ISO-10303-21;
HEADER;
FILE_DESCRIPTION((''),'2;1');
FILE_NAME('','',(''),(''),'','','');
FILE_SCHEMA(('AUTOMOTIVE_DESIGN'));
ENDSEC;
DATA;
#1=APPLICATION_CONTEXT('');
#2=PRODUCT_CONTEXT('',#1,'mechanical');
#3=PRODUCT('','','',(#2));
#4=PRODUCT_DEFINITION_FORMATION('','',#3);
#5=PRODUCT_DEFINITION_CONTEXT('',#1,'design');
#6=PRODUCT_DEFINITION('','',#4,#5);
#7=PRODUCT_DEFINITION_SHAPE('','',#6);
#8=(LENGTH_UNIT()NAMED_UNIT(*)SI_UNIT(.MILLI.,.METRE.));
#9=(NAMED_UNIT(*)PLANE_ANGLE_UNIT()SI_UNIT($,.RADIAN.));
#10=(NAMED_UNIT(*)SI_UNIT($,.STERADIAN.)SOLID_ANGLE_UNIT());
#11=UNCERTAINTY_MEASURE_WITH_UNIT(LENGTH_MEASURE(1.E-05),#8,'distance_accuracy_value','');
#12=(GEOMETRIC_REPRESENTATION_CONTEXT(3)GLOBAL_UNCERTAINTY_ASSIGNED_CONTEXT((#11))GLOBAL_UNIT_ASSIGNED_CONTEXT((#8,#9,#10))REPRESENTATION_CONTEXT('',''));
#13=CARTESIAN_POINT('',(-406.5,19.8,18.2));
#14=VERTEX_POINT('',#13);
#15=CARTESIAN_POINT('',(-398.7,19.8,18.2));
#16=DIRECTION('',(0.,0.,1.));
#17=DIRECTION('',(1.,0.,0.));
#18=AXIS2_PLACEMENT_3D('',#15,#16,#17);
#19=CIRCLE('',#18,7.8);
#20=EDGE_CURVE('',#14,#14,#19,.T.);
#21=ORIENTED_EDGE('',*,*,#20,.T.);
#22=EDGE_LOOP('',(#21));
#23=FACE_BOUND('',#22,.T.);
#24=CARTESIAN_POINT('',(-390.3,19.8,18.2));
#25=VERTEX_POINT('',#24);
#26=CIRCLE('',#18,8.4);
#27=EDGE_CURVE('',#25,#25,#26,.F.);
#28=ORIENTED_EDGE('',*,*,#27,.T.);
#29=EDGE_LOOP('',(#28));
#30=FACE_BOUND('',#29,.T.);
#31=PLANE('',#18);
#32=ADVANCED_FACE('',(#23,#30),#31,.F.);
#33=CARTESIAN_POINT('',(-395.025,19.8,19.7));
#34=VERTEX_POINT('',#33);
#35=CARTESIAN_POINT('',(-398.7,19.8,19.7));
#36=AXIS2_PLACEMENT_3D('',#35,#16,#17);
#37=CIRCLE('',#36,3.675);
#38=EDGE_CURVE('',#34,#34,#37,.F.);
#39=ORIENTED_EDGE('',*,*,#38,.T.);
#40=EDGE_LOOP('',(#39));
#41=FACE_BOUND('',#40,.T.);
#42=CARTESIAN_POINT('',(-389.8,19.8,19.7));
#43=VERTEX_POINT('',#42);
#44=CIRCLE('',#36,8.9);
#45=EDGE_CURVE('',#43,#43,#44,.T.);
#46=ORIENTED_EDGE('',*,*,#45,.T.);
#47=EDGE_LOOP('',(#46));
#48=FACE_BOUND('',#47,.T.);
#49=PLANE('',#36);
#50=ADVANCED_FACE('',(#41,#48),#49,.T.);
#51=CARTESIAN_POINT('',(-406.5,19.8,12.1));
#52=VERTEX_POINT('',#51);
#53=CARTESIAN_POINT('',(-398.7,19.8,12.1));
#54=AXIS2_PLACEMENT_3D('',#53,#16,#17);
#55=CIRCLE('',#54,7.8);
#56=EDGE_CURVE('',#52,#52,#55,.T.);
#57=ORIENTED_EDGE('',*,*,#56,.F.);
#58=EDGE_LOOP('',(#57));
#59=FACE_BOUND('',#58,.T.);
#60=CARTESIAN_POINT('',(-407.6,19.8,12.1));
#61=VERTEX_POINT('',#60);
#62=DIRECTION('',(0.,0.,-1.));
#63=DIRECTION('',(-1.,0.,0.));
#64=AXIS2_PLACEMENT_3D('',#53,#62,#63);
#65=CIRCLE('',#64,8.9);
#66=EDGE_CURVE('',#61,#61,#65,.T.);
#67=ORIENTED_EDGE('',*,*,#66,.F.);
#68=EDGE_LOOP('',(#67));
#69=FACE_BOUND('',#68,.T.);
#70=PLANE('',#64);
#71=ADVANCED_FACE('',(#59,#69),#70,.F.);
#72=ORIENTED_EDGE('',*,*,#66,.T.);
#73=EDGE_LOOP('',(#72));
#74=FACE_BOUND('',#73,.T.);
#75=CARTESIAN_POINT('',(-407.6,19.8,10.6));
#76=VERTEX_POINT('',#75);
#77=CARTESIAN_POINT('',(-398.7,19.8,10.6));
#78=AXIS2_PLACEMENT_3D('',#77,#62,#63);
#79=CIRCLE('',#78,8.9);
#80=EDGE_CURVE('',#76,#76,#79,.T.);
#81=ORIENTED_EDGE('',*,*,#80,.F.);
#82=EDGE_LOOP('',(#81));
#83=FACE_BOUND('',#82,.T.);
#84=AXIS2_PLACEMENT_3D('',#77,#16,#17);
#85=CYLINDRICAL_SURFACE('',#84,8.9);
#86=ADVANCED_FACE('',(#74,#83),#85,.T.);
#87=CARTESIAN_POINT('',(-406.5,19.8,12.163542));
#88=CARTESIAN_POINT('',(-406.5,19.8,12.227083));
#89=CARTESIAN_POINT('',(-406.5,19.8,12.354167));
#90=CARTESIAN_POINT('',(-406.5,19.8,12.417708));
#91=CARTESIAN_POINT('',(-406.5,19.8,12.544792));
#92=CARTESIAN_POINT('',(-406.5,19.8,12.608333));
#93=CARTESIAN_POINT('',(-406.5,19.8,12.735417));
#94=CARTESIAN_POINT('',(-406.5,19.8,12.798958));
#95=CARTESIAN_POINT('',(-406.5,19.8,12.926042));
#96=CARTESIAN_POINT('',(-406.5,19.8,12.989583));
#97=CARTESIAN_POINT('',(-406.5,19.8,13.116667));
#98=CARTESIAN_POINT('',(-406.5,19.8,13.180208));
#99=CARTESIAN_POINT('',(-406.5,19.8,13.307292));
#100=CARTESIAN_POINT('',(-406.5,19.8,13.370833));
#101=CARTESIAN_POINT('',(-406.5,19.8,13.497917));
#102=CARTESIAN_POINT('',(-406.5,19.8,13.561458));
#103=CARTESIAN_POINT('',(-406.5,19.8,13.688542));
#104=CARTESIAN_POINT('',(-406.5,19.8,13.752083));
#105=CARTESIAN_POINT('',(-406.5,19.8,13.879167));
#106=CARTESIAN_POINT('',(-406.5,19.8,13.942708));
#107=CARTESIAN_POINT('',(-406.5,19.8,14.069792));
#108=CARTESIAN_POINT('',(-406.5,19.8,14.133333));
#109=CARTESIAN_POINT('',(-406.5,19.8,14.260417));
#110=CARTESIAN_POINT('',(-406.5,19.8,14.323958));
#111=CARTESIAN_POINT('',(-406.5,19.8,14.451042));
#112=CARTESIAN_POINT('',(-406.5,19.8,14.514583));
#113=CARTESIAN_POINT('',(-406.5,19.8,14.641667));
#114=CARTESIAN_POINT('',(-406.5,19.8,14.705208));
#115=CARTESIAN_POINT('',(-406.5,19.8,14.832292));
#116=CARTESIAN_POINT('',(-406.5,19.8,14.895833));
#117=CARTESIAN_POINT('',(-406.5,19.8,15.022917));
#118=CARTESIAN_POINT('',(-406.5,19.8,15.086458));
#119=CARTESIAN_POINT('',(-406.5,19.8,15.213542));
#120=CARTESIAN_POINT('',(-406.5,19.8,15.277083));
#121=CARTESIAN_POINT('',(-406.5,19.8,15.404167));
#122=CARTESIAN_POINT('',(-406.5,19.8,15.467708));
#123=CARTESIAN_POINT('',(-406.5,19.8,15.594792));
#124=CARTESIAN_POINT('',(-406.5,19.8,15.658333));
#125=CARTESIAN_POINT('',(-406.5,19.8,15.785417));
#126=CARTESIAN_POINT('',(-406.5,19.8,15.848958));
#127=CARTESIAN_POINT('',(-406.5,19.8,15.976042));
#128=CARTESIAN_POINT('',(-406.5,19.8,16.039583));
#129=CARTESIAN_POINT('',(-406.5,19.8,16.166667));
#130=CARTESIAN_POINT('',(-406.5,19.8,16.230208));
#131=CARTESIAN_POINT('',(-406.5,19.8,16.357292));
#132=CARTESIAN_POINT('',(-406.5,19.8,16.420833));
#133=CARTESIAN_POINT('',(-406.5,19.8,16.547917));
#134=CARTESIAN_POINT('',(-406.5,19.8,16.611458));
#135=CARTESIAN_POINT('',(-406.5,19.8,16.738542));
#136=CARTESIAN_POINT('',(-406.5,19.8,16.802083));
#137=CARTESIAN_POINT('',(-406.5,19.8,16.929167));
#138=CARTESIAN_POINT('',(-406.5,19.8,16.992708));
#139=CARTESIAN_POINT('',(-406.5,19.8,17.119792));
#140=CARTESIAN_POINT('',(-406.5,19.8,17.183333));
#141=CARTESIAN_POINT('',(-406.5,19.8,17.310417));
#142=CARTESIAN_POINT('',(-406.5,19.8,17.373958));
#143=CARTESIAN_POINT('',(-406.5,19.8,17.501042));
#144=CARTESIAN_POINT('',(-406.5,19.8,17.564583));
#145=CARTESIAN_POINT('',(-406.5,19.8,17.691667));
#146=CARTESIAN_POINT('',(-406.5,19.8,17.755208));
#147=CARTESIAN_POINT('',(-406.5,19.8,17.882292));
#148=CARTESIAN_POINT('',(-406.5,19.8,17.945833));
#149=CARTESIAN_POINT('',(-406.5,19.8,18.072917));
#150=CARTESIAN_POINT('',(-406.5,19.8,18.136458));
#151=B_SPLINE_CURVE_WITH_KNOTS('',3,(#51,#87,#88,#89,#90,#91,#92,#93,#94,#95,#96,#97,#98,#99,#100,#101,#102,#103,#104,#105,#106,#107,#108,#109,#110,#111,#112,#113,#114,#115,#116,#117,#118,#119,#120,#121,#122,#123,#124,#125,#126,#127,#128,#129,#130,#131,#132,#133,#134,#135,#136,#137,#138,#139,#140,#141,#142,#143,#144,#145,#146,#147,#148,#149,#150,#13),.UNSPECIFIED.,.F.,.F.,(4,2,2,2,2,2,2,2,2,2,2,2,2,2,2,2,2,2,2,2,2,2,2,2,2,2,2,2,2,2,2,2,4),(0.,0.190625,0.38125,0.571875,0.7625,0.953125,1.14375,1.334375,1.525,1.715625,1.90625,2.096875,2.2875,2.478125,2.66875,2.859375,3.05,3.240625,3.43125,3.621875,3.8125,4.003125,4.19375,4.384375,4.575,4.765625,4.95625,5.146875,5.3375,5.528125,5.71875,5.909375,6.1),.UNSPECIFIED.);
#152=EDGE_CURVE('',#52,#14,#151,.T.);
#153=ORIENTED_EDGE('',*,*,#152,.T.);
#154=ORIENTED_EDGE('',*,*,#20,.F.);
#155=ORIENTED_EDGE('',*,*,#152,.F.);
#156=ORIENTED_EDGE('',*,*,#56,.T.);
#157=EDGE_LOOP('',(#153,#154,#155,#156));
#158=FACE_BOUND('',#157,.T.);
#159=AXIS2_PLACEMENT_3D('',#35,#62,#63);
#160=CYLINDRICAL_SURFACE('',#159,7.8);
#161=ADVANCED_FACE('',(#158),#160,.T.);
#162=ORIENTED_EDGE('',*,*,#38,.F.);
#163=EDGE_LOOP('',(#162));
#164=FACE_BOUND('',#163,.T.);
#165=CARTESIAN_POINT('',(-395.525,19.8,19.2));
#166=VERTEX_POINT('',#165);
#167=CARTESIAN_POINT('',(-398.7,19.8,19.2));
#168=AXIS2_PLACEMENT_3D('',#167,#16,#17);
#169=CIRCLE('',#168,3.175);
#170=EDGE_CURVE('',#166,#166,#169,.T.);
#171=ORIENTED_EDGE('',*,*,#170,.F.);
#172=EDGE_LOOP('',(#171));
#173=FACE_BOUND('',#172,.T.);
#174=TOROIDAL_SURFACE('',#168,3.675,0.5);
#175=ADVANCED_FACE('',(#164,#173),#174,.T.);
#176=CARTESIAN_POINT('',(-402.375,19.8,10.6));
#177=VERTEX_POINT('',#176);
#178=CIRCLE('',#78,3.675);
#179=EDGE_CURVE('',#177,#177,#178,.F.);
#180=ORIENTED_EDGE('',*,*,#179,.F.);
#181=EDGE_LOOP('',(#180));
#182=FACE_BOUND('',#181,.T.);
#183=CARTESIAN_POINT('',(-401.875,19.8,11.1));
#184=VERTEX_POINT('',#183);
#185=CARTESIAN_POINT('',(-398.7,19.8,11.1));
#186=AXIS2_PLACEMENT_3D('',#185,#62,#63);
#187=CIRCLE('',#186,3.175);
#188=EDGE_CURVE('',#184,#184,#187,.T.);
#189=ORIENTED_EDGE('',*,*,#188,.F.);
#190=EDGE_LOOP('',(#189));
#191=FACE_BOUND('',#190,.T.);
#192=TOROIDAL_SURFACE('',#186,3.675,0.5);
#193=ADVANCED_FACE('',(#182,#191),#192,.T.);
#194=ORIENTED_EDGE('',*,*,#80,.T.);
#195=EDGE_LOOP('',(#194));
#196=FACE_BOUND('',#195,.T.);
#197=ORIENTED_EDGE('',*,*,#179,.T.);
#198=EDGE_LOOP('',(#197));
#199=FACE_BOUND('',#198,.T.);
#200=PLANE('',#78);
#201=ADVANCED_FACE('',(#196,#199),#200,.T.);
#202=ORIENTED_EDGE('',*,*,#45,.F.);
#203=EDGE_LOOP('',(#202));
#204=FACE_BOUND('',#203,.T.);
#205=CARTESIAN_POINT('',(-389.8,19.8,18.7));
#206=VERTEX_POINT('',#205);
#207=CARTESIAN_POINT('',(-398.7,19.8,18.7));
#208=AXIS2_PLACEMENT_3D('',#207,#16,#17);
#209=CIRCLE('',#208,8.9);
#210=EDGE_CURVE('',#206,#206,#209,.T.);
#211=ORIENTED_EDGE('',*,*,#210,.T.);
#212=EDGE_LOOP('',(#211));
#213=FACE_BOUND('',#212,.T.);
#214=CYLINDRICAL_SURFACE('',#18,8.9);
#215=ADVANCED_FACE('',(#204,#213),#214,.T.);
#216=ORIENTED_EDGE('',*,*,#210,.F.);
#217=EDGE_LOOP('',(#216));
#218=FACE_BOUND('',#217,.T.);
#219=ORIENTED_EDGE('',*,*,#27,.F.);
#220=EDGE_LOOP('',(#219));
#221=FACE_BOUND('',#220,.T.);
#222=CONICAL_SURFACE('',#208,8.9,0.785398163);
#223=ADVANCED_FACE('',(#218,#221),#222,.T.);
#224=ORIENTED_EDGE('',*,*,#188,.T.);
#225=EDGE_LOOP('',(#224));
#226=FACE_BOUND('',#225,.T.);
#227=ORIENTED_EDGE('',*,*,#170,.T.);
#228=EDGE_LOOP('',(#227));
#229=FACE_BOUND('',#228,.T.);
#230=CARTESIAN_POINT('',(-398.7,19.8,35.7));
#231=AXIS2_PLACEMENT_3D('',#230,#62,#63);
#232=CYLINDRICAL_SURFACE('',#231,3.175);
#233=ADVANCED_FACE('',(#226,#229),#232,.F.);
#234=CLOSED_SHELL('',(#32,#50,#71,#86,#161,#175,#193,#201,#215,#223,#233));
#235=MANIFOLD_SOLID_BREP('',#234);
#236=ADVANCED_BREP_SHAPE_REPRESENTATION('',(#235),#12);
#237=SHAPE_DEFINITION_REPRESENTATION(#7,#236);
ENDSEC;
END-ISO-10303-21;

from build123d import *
from OCP.BRepFilletAPI import BRepFilletAPI_MakeChamfer

# Parameters (mm, degrees)
ESBO_O1_W                  = 97.4
ESBO_O1_H                  = 1.25
RESSALTO_EXTRUS_O1_DEPTH   = 6.2
ESBO_O2_W                  = 97.4
ESBO_O2_H                  = 1.25
RESSALTO_EXTRUS_O2_DEPTH   = 40.6
FILETE1_R                  = 1
ESBO_O3_R                  = 2
ESBO_O3_R_2                = 2.5
ESBO_O3_R_3                = 6
ESBO_O3_W                  = 4
ESBO_O3_H                  = 6
ESBO_O3_W_2                = 6
ESBO_O3_H_2                = 8
CORTE_EXTRUS_O1_DEPTH      = 40.6
ESBO_O6_R                  = 3
RESSALTO_EXTRUS_O3_DEPTH   = 22.5
ESBO_O7_R                  = 2.25
RESSALTO_EXTRUS_O4_DEPTH   = 12.3
FILETE2_R                  = 0.25
ESBO_O12_R                 = 4
RESSALTO_EXTRUS_O7_DEPTH   = 3
ESBO_O13_R                 = 4.5
RESSALTO_EXTRUS_O8_DEPTH   = 8.1
ESBO_O8_R                  = 16.365
ESBO_O8_R_2                = 2.3
RESSALTO_EXTRUS_O5_DEPTH   = 4
ESBO_O9_R                  = 4
ESBO_O9_R_2                = 2.3
RESSALTO_EXTRUS_O6_DEPTH   = 8.9
ESBO_O10_R                 = 13.865
ESBO_O10_R_2               = 4.9
CORTE_EXTRUS_O2_DEPTH      = 1
CORTE_EXTRUS_O3_START      = -1
ESBO_O11_R                 = 13.86
ESBO_O11_R_2               = 4.9
CORTE_EXTRUS_O3_DEPTH      = 1
ESBO_O14_R                 = 18.34
ESBO_O14_R_2               = 3.1
RESSALTO_EXTRUS_O9_DEPTH   = 4
ESBO_O15_R                 = 7.8
ESBO_O15_R_2               = 3.1
RESSALTO_EXTRUS_O10_DEPTH  = 11.6
RESSALTO_EXTRUS_O11_START  = -1.5
ESBO_O16_R                 = 8.9
ESBO_O16_R_2               = 3.1
RESSALTO_EXTRUS_O11_DEPTH  = 1.5
CHANFRO1_SIZE              = 0.5
ESBO_O17_R                 = 3.5
ESBO_O17_R_2               = 3.1
RESSALTO_EXTRUS_O12_DEPTH  = 0.5
CORTE_EXTRUS_O4_START      = -1
ESBO_O18_R                 = 15.84
ESBO_O18_R_2               = 8.9
CORTE_EXTRUS_O4_DEPTH      = 1
ESBO_O19_R                 = 15.825
ESBO_O19_R_2               = 8.9
CORTE_EXTRUS_O5_DEPTH      = 1
RESSALTO_EXTRUS_O13_DEPTH  = 0.5
ESBO_O21_R                 = 1.75
RESSALTO_EXTRUS_O14_DEPTH  = 0.92
ESBO_O23_R                 = 17.675026778
RESSALTO_EXTRUS_O15_DEPTH  = 15
FILETE4_R                  = 1
ESBO_O24_R                 = 2.05
ESBO_O24_R_2               = 1.75
RESSALTO_EXTRUS_O16_DEPTH  = 1
ESBO_O25_R                 = 2.5
RESSALTO_EXTRUS_O17_DEPTH  = 0.1
ESBO_O26_R                 = 1
RESSALTO_EXTRUS_O18_DEPTH  = 0.5
FILETE6_R                  = 0.1
ESBO_O27_R                 = 4.99
RESSALTO_EXTRUS_O19_DEPTH  = 16.57
RESSALTO_EXTRUS_O20_START  = -25
ESBO_O28_R                 = 1
RESSALTO_EXTRUS_O20_DEPTH  = 25
FILETE5_R                  = 0.25
ESBO_O29_R                 = 3.59
RESSALTO_EXTRUS_O21_DEPTH  = 6
ESBO_O30_R                 = 2.7
RESSALTO_EXTRUS_O22_DEPTH  = 2
FILETE7_R                  = 1.4
CORTE_EXTRUS_O6_DEPTH      = 1.4
ESBO_O32_R                 = 1.75
RESSALTO_EXTRUS_O23_DEPTH  = 7.8
CHANFRO2_SIZE              = 1
CHANFRO2_SIZE2             = 0.466307658
RESSALTO_EXTRUS_O24_DEPTH  = 10
ESBO_O34_R                 = 2
RESSALTO_EXTRUS_O25_DEPTH  = 5
ESBO_O35_R                 = 7.8
RESSALTO_EXTRUS_O26_DEPTH  = 7.6
ESBO_O37_R                 = 8.9
RESSALTO_EXTRUS_O27_DEPTH  = 1.5
CHANFRO3_SIZE              = 0.5
ESBO_O38_R                 = 8.9
RESSALTO_EXTRUS_O28_DEPTH  = 1.5
CORTE_EXTRUS_O7_DEPTH      = 16
CORTE_EXTRUS_O7_DEPTH_BACK = 35.5
ESBO_O39_R                 = 3.175
FILETE11_R                 = 0.5
FILETE12_R                 = 0.25
FILETE13_R                 = 0.5


with BuildPart() as part:
    # Esboço1 → Ressalto-extrusão1 (new body)
    with BuildSketch(Plane.XY):
        Rectangle(ESBO_O1_W, ESBO_O1_H)
    extrude(amount=RESSALTO_EXTRUS_O1_DEPTH)

    # Esboço2 → Ressalto-extrusão2 (add)
    with BuildSketch(Plane(origin=(0, -0.625, 0), x_dir=(1, 0, 0), z_dir=(0, 1, 0))):
        with Locations((0, -0.625)):
            Rectangle(ESBO_O2_W, ESBO_O2_H)
    extrude(amount=RESSALTO_EXTRUS_O2_DEPTH)

    # Filete1
    filete1_edges = [part.edges().sort_by_distance(p)[0] for p in [
        (48.7, 0, 6.2),
        (48.7, 39.975, 0.625),
        (-48.7, 39.975, 0.625),
        (-48.7, 0, 6.2),
    ]]
    fillet(filete1_edges, radius=FILETE1_R)

    # Esboço3 → Corte-extrusão1 (cut)
    with BuildSketch(Plane.XY.offset(1.25)):
        with Locations((-43.7, 4.975)):
            Circle(ESBO_O3_R)
        with Locations((0, 4.975)):
            Circle(ESBO_O3_R)
        with Locations((38.95, 19.8)):
            Circle(ESBO_O3_R_2)
        with Locations((14.7, 19.8)):
            Circle(ESBO_O3_R_3)
        with Locations((41.7, 30.975)):
            Rectangle(ESBO_O3_W, ESBO_O3_H)
        with Locations((41.7, 8.975)):
            Rectangle(ESBO_O3_W, ESBO_O3_H)
        with Locations((-33.7, 8.975)):
            Rectangle(ESBO_O3_W_2, ESBO_O3_H_2)
        with BuildLine():
            Line((27.7, 36.975), (30.7, 36.975))
            ThreePointArc((30.7, 36.975), (32.7, 34.975), (30.7, 32.975))
            Line((30.7, 32.975), (27.7, 32.975))
            ThreePointArc((27.7, 32.975), (25.7, 34.975), (27.7, 36.975))
        make_face()
        with Locations((-33.7, 30.975)):
            Rectangle(ESBO_O3_W_2, ESBO_O3_H_2)
    extrude(amount=-CORTE_EXTRUS_O1_DEPTH, mode=Mode.SUBTRACT)

    # Esboço6 → Ressalto-extrusão3 (add)
    with BuildSketch(Plane(origin=(0, 0, 0), x_dir=(-1, 0, 0), z_dir=(0, 0, -1))):
        with Locations((25.7, 19.8)):
            Circle(ESBO_O6_R)
    extrude(amount=-RESSALTO_EXTRUS_O3_DEPTH)

    # Esboço7 → Ressalto-extrusão4 (add)
    with BuildSketch(Plane(origin=(0, 0, 0), x_dir=(-1, 0, 0), z_dir=(0, 0, -1))):
        with Locations((4.1, 23.975)):
            Circle(ESBO_O7_R)
    extrude(amount=-RESSALTO_EXTRUS_O4_DEPTH)

    # Filete2
    filete2_edges = [part.edges().sort_by_distance(p)[0] for p in [
        (-22.7, 19.8, 22.5),
        (-1.85, 23.975, 12.3),
    ]]
    fillet(filete2_edges, radius=FILETE2_R)

    # Esboço12 → Ressalto-extrusão7 (add)
    with BuildSketch(Plane.XY):
        with Locations(Location((-4.1, 23.975, 0), (0, 0, 180))):
            Circle(ESBO_O12_R)
    extrude(amount=RESSALTO_EXTRUS_O7_DEPTH)

    # Esboço13 → Ressalto-extrusão8 (add)
    with BuildSketch(Plane(origin=(0, 0, 0), x_dir=(-1, 0, 0), z_dir=(0, 0, -1))):
        with Locations((25.7, 19.8)):
            Circle(ESBO_O13_R)
    extrude(amount=-RESSALTO_EXTRUS_O8_DEPTH)

    # Esboço8 → Ressalto-extrusão5 (add)
    with BuildSketch(Plane.XY.offset(3)):
        with Locations((-4.1, 23.975)):
            Circle(ESBO_O8_R)
        with Locations((-4.1, 23.975)):
            Circle(ESBO_O8_R_2, mode=Mode.SUBTRACT)
    extrude(amount=RESSALTO_EXTRUS_O5_DEPTH)

    # Esboço9 → Ressalto-extrusão6 (add)
    with BuildSketch(Plane.XY.offset(3)):
        with Locations(Location((-4.1, 23.975, 0), (0, 0, 180))):
            Circle(ESBO_O9_R)
        with Locations((-4.1, 23.975)):
            Circle(ESBO_O9_R_2, mode=Mode.SUBTRACT)
    extrude(amount=RESSALTO_EXTRUS_O6_DEPTH)

    # Esboço10 → Corte-extrusão2 (cut)
    with BuildSketch(Plane.XY.offset(7)):
        with Locations((-4.1, 23.975)):
            Circle(ESBO_O10_R)
        with Locations((-4.1, 23.975)):
            Circle(ESBO_O10_R_2, mode=Mode.SUBTRACT)
    extrude(amount=-CORTE_EXTRUS_O2_DEPTH, mode=Mode.SUBTRACT)

    # Esboço11 → Corte-extrusão3 (cut)
    with BuildSketch(Plane(origin=(0, 0, 3), x_dir=(-1, 0, 0), z_dir=(0, 0, -1)).offset(CORTE_EXTRUS_O3_START)):
        with Locations((4.1, 23.975)):
            Circle(ESBO_O11_R)
        with Locations(Location((4.1, 23.975, 0), (0, 0, 180))):
            Circle(ESBO_O11_R_2, mode=Mode.SUBTRACT)
    extrude(amount=CORTE_EXTRUS_O3_DEPTH, mode=Mode.SUBTRACT)

    # Esboço14 → Ressalto-extrusão9 (add)
    with BuildSketch(Plane.XY.offset(8.1)):
        with Locations(Location((-25.7, 19.8, 0), (0, 0, 15.545528491))):
            Circle(ESBO_O14_R)
        with Locations((-25.7, 19.8)):
            Circle(ESBO_O14_R_2, mode=Mode.SUBTRACT)
    extrude(amount=RESSALTO_EXTRUS_O9_DEPTH)

    # Esboço15 → Ressalto-extrusão10 (add)
    with BuildSketch(Plane.XY.offset(8.1)):
        with Locations((-25.7, 19.8)):
            Circle(ESBO_O15_R)
        with Locations((-25.7, 19.8)):
            Circle(ESBO_O15_R_2, mode=Mode.SUBTRACT)
    extrude(amount=RESSALTO_EXTRUS_O10_DEPTH)

    # Esboço16 → Ressalto-extrusão11 (add)
    with BuildSketch(Plane.XY.offset(19.7).offset(RESSALTO_EXTRUS_O11_START)):
        with Locations((-25.7, 19.8)):
            Circle(ESBO_O16_R)
        with Locations((-25.7, 19.8)):
            Circle(ESBO_O16_R_2, mode=Mode.SUBTRACT)
    extrude(amount=RESSALTO_EXTRUS_O11_DEPTH)

    # Chanfro1
    chanfro1_edges = [part.edges().sort_by_distance(p)[0] for p in [
        (-34.6, 19.8, 18.2),
    ]]
    chamfer(chanfro1_edges, length=CHANFRO1_SIZE)

    # Esboço17 → Ressalto-extrusão12 (add)
    with BuildSketch(Plane.XY.offset(19.7)):
        with Locations((-25.7, 19.8)):
            Circle(ESBO_O17_R)
        with Locations((-25.7, 19.8)):
            Circle(ESBO_O17_R_2, mode=Mode.SUBTRACT)
    extrude(amount=RESSALTO_EXTRUS_O12_DEPTH)

    # Esboço18 → Corte-extrusão4 (cut)
    with BuildSketch(Plane.XY.offset(12.1).offset(CORTE_EXTRUS_O4_START)):
        with Locations((-25.7, 19.8)):
            Circle(ESBO_O18_R)
        with Locations((-25.7, 19.8)):
            Circle(ESBO_O18_R_2, mode=Mode.SUBTRACT)
    extrude(amount=CORTE_EXTRUS_O4_DEPTH, mode=Mode.SUBTRACT)

    # Esboço19 → Corte-extrusão5 (cut)
    with BuildSketch(Plane(origin=(0, 0, 8.1), x_dir=(-1, 0, 0), z_dir=(0, 0, -1))):
        with Locations((25.7, 19.8)):
            Circle(ESBO_O19_R)
        with Locations(Location((25.7, 19.8, 0), (0, 0, 180))):
            Circle(ESBO_O19_R_2, mode=Mode.SUBTRACT)
    extrude(amount=-CORTE_EXTRUS_O5_DEPTH, mode=Mode.SUBTRACT)

    # Esboço20 → Ressalto-extrusão13 (add)
    with BuildSketch(Plane.XY.offset(20.2)):
        with BuildLine():
            Line((-28.322721615, 20.626940949), (-29.67498238, 21.05330713))
            ThreePointArc((-29.67498238, 21.05330713), (-29.981119219, 21.326162864), (-29.980184512, 21.736247175))
            ThreePointArc((-29.980184512, 21.736247175), (-28.137076875, 23.816178393), (-25.441102958, 24.490629478))
            ThreePointArc((-25.441102958, 24.490629478), (-25.076922131, 24.302102712), (-24.9762544, 23.904565262))
            Line((-24.9762544, 23.904565262), (-25.222467511, 22.508221321))
            ThreePointArc((-25.222467511, 22.508221321), (-24.430191314, 22.239279791), (-23.755456352, 21.744543648))
            Line((-23.755456352, 21.744543648), (-22.474650348, 23.025349652))
            ThreePointArc((-22.474650348, 23.025349652), (-22.187573749, 23.840156974), (-22.642480013, 24.574584803))
            ThreePointArc((-22.642480013, 24.574584803), (-31.36966388, 19.8), (-22.642480013, 15.025415197))
            ThreePointArc((-22.642480013, 15.025415197), (-22.187573749, 15.759843026), (-22.474650348, 16.574650348))
            Line((-22.474650348, 16.574650348), (-23.755456352, 17.855456352))
            ThreePointArc((-23.755456352, 17.855456352), (-24.430191314, 17.360720209), (-25.222467511, 17.091778679))
            Line((-25.222467511, 17.091778679), (-24.9762544, 15.695434738))
            ThreePointArc((-24.9762544, 15.695434738), (-25.076922131, 15.297897288), (-25.441102958, 15.109370522))
            ThreePointArc((-25.441102958, 15.109370522), (-28.137076875, 15.783821607), (-29.980184512, 17.863752825))
            ThreePointArc((-29.980184512, 17.863752825), (-29.981119219, 18.273837136), (-29.67498238, 18.54669287))
            Line((-29.67498238, 18.54669287), (-28.322721615, 18.973059051))
            ThreePointArc((-28.322721615, 18.973059051), (-28.45, 19.8), (-28.322721615, 20.626940949))
        make_face()
    extrude(amount=RESSALTO_EXTRUS_O13_DEPTH)

    # Esboço21 → Ressalto-extrusão14 (add)
    with BuildSketch(Plane(origin=(0, 0, 0), x_dir=(-1, 0, 0), z_dir=(0, 0, -1))):
        with BuildLine():
            Line((3.595164465, 5.161527392), (2.779555471, 20.88173038))
            ThreePointArc((2.779555471, 20.88173038), (-2.196938457, 32.222448714), (-13.433733778, 37.429349428))
            Line((-13.433733778, 37.429349428), (-29.134017665, 38.565609025))
            ThreePointArc((-29.134017665, 38.565609025), (-31.845866586, 37.610857858), (-32.993876913, 34.975))
            Line((-32.993876913, 34.975), (-32.993876913, 30.076020514))
            Line((-32.993876913, 30.076020514), (-30.487753652, 27.518219171))
            ThreePointArc((-30.487753652, 27.518219171), (-27.196938457, 7.727551286), (-7.477551833, 4.033530282))
            Line((-7.477551833, 4.033530282), (-4.87273477, 1.375))
            Line((-4.87273477, 1.375), (0, 1.375))
            ThreePointArc((0, 1.375), (2.610699007, 2.49624009), (3.595164465, 5.161527392))
        make_face()
        with Locations((0, 4.975)):
            Circle(ESBO_O21_R, mode=Mode.SUBTRACT)
        with Locations((-29.393876913, 34.975)):
            Circle(ESBO_O21_R, mode=Mode.SUBTRACT)
    extrude(amount=RESSALTO_EXTRUS_O14_DEPTH)

    # Esboço23 → Ressalto-extrusão15 (add)
    with BuildSketch(Plane.XY):
        with Locations((14.7, 19.8)):
            Circle(ESBO_O23_R)
    extrude(amount=-RESSALTO_EXTRUS_O15_DEPTH)

    # Filete4
    filete4_edges = [part.edges().sort_by_distance(p)[0] for p in [
        (-2.975026778, 19.8, -15),
    ]]
    fillet(filete4_edges, radius=FILETE4_R)

    # Esboço24 → Ressalto-extrusão16 (add)
    # profile 1 of 2: a face of its own
    with BuildSketch(Plane(origin=(0, 0, -0.92), x_dir=(-1, 0, 0), z_dir=(0, 0, -1))):
        with Locations((0, 4.975)):
            Circle(ESBO_O24_R)
        with Locations((0, 4.975)):
            Circle(ESBO_O24_R_2, mode=Mode.SUBTRACT)
    # profile 2 of 2: a face of its own
    with BuildSketch(Plane(origin=(0, 0, -0.92), x_dir=(-1, 0, 0), z_dir=(0, 0, -1))):
        with Locations((-29.393876913, 34.975)):
            Circle(ESBO_O24_R)
        with Locations((-29.393876913, 34.975)):
            Circle(ESBO_O24_R_2, mode=Mode.SUBTRACT)
    extrude(amount=RESSALTO_EXTRUS_O16_DEPTH)

    # Esboço25 → Ressalto-extrusão17 (add)
    with BuildSketch(Plane(origin=(0, 0, -15), x_dir=(-1, 0, 0), z_dir=(0, 0, -1))):
        with Locations(Location((-14.7, 19.8, 0), (0, 0, 180))):
            Circle(ESBO_O25_R)
    extrude(amount=RESSALTO_EXTRUS_O17_DEPTH)

    # Esboço26 → Ressalto-extrusão18 (add)
    with BuildSketch(Plane(origin=(0, 0, -15.1), x_dir=(-1, 0, 0), z_dir=(0, 0, -1))):
        with Locations((-14.7, 19.8)):
            Circle(ESBO_O26_R)
    extrude(amount=RESSALTO_EXTRUS_O18_DEPTH)

    # Filete6
    filete6_edges = [part.edges().sort_by_distance(p)[0] for p in [
        (12.2, 19.8, -15.1),
    ]]
    fillet(filete6_edges, radius=FILETE6_R - 0.0001)  # a hair under: the kernel refuses the full size

    # Esboço27 → Ressalto-extrusão19 (add)
    with BuildSketch(Plane.XY.offset(-15)):
        with Locations(Location((14.7, 19.8, 0), (0, 0, 180))):
            Circle(ESBO_O27_R)
    extrude(amount=RESSALTO_EXTRUS_O19_DEPTH)

    # Esboço28 → Ressalto-extrusão20 (add)
    with BuildSketch(Plane(origin=(0, 0, -15.6), x_dir=(-1, 0, 0), z_dir=(0, 0, -1)).offset(RESSALTO_EXTRUS_O20_START)):
        with Locations((-14.7, 19.8)):
            Circle(ESBO_O28_R)
    extrude(amount=RESSALTO_EXTRUS_O20_DEPTH)

    # Filete5
    filete5_edges = [part.edges().sort_by_distance(p)[0] for p in [
        (15.7, 19.8, -15.6),
        (15.7, 19.8, 9.4),
    ]]
    fillet(filete5_edges, radius=FILETE5_R)

    # Esboço29 → Ressalto-extrusão21 (add)
    with BuildSketch(Plane.XY.offset(9.15)):
        with Locations((14.7, 19.8)):
            Circle(ESBO_O29_R)
    extrude(amount=-RESSALTO_EXTRUS_O21_DEPTH)

    # Esboço30 → Ressalto-extrusão22 (add)
    with BuildSketch(Plane.XY.offset(1.25)):
        with Locations(Location((0, 4.975, 0), (0, 0, 180))):
            Circle(ESBO_O30_R)
        with Locations(Location((29.393876913, 34.975, 0), (0, 0, 227.672748848))):
            Circle(ESBO_O30_R)
    extrude(amount=RESSALTO_EXTRUS_O22_DEPTH)

    # Filete7
    filete7_edges = [part.edges().sort_by_distance(p)[0] for p in [
        (2.7, 4.975, 3.25),
        (31.211960314, 36.971139461, 3.25),
    ]]
    fillet(filete7_edges, radius=FILETE7_R)

    # Esboço31 → Corte-extrusão6 (cut)
    with BuildSketch(Plane.XY.offset(3.25)):
        with BuildLine():
            Line((29.093876913, 37.175), (29.693876913, 37.175))
            ThreePointArc((29.693876913, 37.175), (29.83529827, 37.116421356), (29.893876913, 36.975))
            Line((29.893876913, 36.975), (29.893876913, 35.975))
            ThreePointArc((29.893876913, 35.975), (30.040323523, 35.621446609), (30.393876913, 35.475))
            Line((30.393876913, 35.475), (31.393876913, 35.475))
            ThreePointArc((31.393876913, 35.475), (31.53529827, 35.416421356), (31.593876913, 35.275))
            Line((31.593876913, 35.275), (31.593876913, 34.675))
            ThreePointArc((31.593876913, 34.675), (31.53529827, 34.533578644), (31.393876913, 34.475))
            Line((31.393876913, 34.475), (30.393876913, 34.475))
            ThreePointArc((30.393876913, 34.475), (30.040323523, 34.328553391), (29.893876913, 33.975))
            Line((29.893876913, 33.975), (29.893876913, 32.975))
            ThreePointArc((29.893876913, 32.975), (29.83529827, 32.833578644), (29.693876913, 32.775))
            Line((29.693876913, 32.775), (29.093876913, 32.775))
            ThreePointArc((29.093876913, 32.775), (28.952455557, 32.833578644), (28.893876913, 32.975))
            Line((28.893876913, 32.975), (28.893876913, 33.975))
            ThreePointArc((28.893876913, 33.975), (28.747430304, 34.328553391), (28.393876913, 34.475))
            Line((28.393876913, 34.475), (27.393876913, 34.475))
            ThreePointArc((27.393876913, 34.475), (27.252455557, 34.533578644), (27.193876913, 34.675))
            Line((27.193876913, 34.675), (27.193876913, 35.275))
            ThreePointArc((27.193876913, 35.275), (27.252455557, 35.416421356), (27.393876913, 35.475))
            Line((27.393876913, 35.475), (28.393876913, 35.475))
            ThreePointArc((28.393876913, 35.475), (28.747430304, 35.621446609), (28.893876913, 35.975))
            Line((28.893876913, 35.975), (28.893876913, 36.975))
            ThreePointArc((28.893876913, 36.975), (28.952455557, 37.116421356), (29.093876913, 37.175))
        make_face()
        with BuildLine():
            Line((-0.142061447, 7.325028719), (0.457938553, 7.325028719))
            ThreePointArc((0.457938553, 7.325028719), (0.59935991, 7.266450075), (0.657938553, 7.125028719))
            Line((0.657938553, 7.125028719), (0.657938553, 6.125028719))
            ThreePointArc((0.657938553, 6.125028719), (0.804385163, 5.771475328), (1.157938553, 5.625028719))
            Line((1.157938553, 5.625028719), (2.157938553, 5.625028719))
            ThreePointArc((2.157938553, 5.625028719), (2.29935991, 5.566450075), (2.357938553, 5.425028719))
            Line((2.357938553, 5.425028719), (2.357938553, 4.825028719))
            ThreePointArc((2.357938553, 4.825028719), (2.29935991, 4.683607363), (2.157938553, 4.625028719))
            Line((2.157938553, 4.625028719), (1.157938553, 4.625028719))
            ThreePointArc((1.157938553, 4.625028719), (0.804385163, 4.478582109), (0.657938553, 4.125028719))
            Line((0.657938553, 4.125028719), (0.657938553, 3.125028719))
            ThreePointArc((0.657938553, 3.125028719), (0.59935991, 2.983607363), (0.457938553, 2.925028719))
            Line((0.457938553, 2.925028719), (-0.142061447, 2.925028719))
            ThreePointArc((-0.142061447, 2.925028719), (-0.283482803, 2.983607363), (-0.342061447, 3.125028719))
            Line((-0.342061447, 3.125028719), (-0.342061447, 4.125028719))
            ThreePointArc((-0.342061447, 4.125028719), (-0.488508056, 4.478582109), (-0.842061447, 4.625028719))
            Line((-0.842061447, 4.625028719), (-1.842061447, 4.625028719))
            ThreePointArc((-1.842061447, 4.625028719), (-1.983482803, 4.683607363), (-2.042061447, 4.825028719))
            Line((-2.042061447, 4.825028719), (-2.042061447, 5.425028719))
            ThreePointArc((-2.042061447, 5.425028719), (-1.983482803, 5.566450075), (-1.842061447, 5.625028719))
            Line((-1.842061447, 5.625028719), (-0.842061447, 5.625028719))
            ThreePointArc((-0.842061447, 5.625028719), (-0.488508056, 5.771475328), (-0.342061447, 6.125028719))
            Line((-0.342061447, 6.125028719), (-0.342061447, 7.125028719))
            ThreePointArc((-0.342061447, 7.125028719), (-0.283482803, 7.266450075), (-0.142061447, 7.325028719))
        make_face()
    extrude(amount=-CORTE_EXTRUS_O6_DEPTH, mode=Mode.SUBTRACT)

    # Esboço32 → Ressalto-extrusão23 (add)
    with BuildSketch(Plane(origin=(0, 0, 1.25), x_dir=(-1, 0, 0), z_dir=(0, 0, -1))):
        with Locations((0, 4.975)):
            Circle(ESBO_O32_R)
        with Locations(Location((-29.393876913, 34.975, 0), (0, 0, 180))):
            Circle(ESBO_O32_R)
    extrude(amount=RESSALTO_EXTRUS_O23_DEPTH)

    # Chanfro2: one chamfer whose edges measure the first distance from different faces: ONE call of the kernel's chamfer builder (chamfer() names one face for all edges)
    chanfro2_edges_1 = [part.edges().sort_by_distance(p)[0] for p in [
        (1.75, 4.975, -6.55),
    ]]
    chanfro2_side_1 = [part.faces().sort_by_distance(p)[0] for p in [
        (1.75, 4.975, -4.235),
    ]]
    chanfro2_edges_2 = [part.edges().sort_by_distance(p)[0] for p in [
        (27.643876913, 34.975, -6.55),
    ]]
    chanfro2_side_2 = [part.faces().sort_by_distance(p)[0] for p in [
        (27.643876913, 34.975, -4.235),
    ]]
    chanfro2 = BRepFilletAPI_MakeChamfer(part.part.solid().wrapped)
    for e in chanfro2_edges_1:
        chanfro2.Add(CHANFRO2_SIZE, CHANFRO2_SIZE2, e.wrapped, chanfro2_side_1[0].wrapped)  # the first distance lies on this face
    for e in chanfro2_edges_2:
        chanfro2.Add(CHANFRO2_SIZE, CHANFRO2_SIZE2, e.wrapped, chanfro2_side_2[0].wrapped)  # the first distance lies on this face
    add(Compound.cast(chanfro2.Shape()), mode=Mode.REPLACE)

    # Esboço33 → Ressalto-extrusão24 (add)
    with BuildSketch(Plane(origin=(0, 0, -0.92), x_dir=(-1, 0, 0), z_dir=(0, 0, -1))):
        with BuildLine():
            Line((3.196311276, 12.849099671), (3.224269109, 12.846096875))
            Line((3.224269109, 12.846096875), (4.292171901, 22.788912554))
            Line((4.292171901, 22.788912554), (2.690076099, 22.960984796))
            ThreePointArc((2.690076099, 22.960984796), (2.95476648, 20.646044994), (2.912651997, 18.316402606))
            Line((2.912651997, 18.316402606), (3.196311276, 12.849099671))
        make_face()
        with BuildLine():
            Line((1.622173307, 13.018169117), (3.196311276, 12.849099671))
            Line((3.196311276, 12.849099671), (2.912651997, 18.316402606))
            ThreePointArc((2.912651997, 18.316402606), (2.472970379, 15.617218633), (1.622173307, 13.018169117))
        make_face()
    extrude(amount=RESSALTO_EXTRUS_O24_DEPTH)

    # Esboço34 → Ressalto-extrusão25 (add)
    with BuildSketch(Plane(origin=(-1.823505509, -0.195852632, 0), x_dir=(0, 0, 1), z_dir=(-0.9942815679049348, -0.10679027916671441, 0))):
        with Locations(Location((-5.92, 18.116957941, 0), (0, 0, 270))):
            Circle(ESBO_O34_R)
    extrude(amount=RESSALTO_EXTRUS_O25_DEPTH)

    # Filete11
    filete11_edges = [part.edges().sort_by_distance(p)[0] for p in [
        (0, -0.625, 0),
    ]]
    fillet(filete11_edges, radius=FILETE11_R)

    # Filete12
    filete12_edges = [part.edges().sort_by_distance(p)[0] for p in [
        (0, 0.625, 1.25),
    ]]
    fillet(filete12_edges, radius=FILETE12_R)


with BuildPart() as body_2:
    # Esboço35 → Ressalto-extrusão26 (new body)
    with BuildSketch(Plane.XY.offset(12.1)):
        with Locations(Location((-398.7, 19.8, 0), (0, 0, 180))):
            Circle(ESBO_O35_R)
    extrude(amount=RESSALTO_EXTRUS_O26_DEPTH)

    # Esboço37 → Ressalto-extrusão27 (add)
    with BuildSketch(Plane.XY.offset(19.7)):
        with Locations((-398.7, 19.8)):
            Circle(ESBO_O37_R)
    extrude(amount=-RESSALTO_EXTRUS_O27_DEPTH)

    # Chanfro3
    chanfro3_edges = [body_2.edges().sort_by_distance(p)[0] for p in [
        (-407.6, 19.8, 18.2),
    ]]
    chamfer(chanfro3_edges, length=CHANFRO3_SIZE)

    # Esboço38 → Ressalto-extrusão28 (add)
    with BuildSketch(Plane(origin=(0, 0, 12.1), x_dir=(-1, 0, 0), z_dir=(0, 0, -1))):
        with Locations(Location((398.7, 19.8, 0), (0, 0, 180))):
            Circle(ESBO_O38_R)
    extrude(amount=RESSALTO_EXTRUS_O28_DEPTH)

    # Esboço39 → Corte-extrusão7 (cut, two sides: drawn at the far end of the back side and taken through both)
    with BuildSketch(Plane.XY.offset(19.7).offset(-CORTE_EXTRUS_O7_DEPTH_BACK)):
        with Locations(Location((-398.7, 19.8, 0), (0, 0, 180))):
            Circle(ESBO_O39_R)
    extrude(amount=CORTE_EXTRUS_O7_DEPTH + CORTE_EXTRUS_O7_DEPTH_BACK, mode=Mode.SUBTRACT)

    # Filete13
    filete13_edges = [body_2.edges().sort_by_distance(p)[0] for p in [
        (-395.525, 19.8, 19.7),
        (-395.525, 19.8, 10.6),
    ]]
    fillet(filete13_edges, radius=FILETE13_R)


solid = body_2.part
